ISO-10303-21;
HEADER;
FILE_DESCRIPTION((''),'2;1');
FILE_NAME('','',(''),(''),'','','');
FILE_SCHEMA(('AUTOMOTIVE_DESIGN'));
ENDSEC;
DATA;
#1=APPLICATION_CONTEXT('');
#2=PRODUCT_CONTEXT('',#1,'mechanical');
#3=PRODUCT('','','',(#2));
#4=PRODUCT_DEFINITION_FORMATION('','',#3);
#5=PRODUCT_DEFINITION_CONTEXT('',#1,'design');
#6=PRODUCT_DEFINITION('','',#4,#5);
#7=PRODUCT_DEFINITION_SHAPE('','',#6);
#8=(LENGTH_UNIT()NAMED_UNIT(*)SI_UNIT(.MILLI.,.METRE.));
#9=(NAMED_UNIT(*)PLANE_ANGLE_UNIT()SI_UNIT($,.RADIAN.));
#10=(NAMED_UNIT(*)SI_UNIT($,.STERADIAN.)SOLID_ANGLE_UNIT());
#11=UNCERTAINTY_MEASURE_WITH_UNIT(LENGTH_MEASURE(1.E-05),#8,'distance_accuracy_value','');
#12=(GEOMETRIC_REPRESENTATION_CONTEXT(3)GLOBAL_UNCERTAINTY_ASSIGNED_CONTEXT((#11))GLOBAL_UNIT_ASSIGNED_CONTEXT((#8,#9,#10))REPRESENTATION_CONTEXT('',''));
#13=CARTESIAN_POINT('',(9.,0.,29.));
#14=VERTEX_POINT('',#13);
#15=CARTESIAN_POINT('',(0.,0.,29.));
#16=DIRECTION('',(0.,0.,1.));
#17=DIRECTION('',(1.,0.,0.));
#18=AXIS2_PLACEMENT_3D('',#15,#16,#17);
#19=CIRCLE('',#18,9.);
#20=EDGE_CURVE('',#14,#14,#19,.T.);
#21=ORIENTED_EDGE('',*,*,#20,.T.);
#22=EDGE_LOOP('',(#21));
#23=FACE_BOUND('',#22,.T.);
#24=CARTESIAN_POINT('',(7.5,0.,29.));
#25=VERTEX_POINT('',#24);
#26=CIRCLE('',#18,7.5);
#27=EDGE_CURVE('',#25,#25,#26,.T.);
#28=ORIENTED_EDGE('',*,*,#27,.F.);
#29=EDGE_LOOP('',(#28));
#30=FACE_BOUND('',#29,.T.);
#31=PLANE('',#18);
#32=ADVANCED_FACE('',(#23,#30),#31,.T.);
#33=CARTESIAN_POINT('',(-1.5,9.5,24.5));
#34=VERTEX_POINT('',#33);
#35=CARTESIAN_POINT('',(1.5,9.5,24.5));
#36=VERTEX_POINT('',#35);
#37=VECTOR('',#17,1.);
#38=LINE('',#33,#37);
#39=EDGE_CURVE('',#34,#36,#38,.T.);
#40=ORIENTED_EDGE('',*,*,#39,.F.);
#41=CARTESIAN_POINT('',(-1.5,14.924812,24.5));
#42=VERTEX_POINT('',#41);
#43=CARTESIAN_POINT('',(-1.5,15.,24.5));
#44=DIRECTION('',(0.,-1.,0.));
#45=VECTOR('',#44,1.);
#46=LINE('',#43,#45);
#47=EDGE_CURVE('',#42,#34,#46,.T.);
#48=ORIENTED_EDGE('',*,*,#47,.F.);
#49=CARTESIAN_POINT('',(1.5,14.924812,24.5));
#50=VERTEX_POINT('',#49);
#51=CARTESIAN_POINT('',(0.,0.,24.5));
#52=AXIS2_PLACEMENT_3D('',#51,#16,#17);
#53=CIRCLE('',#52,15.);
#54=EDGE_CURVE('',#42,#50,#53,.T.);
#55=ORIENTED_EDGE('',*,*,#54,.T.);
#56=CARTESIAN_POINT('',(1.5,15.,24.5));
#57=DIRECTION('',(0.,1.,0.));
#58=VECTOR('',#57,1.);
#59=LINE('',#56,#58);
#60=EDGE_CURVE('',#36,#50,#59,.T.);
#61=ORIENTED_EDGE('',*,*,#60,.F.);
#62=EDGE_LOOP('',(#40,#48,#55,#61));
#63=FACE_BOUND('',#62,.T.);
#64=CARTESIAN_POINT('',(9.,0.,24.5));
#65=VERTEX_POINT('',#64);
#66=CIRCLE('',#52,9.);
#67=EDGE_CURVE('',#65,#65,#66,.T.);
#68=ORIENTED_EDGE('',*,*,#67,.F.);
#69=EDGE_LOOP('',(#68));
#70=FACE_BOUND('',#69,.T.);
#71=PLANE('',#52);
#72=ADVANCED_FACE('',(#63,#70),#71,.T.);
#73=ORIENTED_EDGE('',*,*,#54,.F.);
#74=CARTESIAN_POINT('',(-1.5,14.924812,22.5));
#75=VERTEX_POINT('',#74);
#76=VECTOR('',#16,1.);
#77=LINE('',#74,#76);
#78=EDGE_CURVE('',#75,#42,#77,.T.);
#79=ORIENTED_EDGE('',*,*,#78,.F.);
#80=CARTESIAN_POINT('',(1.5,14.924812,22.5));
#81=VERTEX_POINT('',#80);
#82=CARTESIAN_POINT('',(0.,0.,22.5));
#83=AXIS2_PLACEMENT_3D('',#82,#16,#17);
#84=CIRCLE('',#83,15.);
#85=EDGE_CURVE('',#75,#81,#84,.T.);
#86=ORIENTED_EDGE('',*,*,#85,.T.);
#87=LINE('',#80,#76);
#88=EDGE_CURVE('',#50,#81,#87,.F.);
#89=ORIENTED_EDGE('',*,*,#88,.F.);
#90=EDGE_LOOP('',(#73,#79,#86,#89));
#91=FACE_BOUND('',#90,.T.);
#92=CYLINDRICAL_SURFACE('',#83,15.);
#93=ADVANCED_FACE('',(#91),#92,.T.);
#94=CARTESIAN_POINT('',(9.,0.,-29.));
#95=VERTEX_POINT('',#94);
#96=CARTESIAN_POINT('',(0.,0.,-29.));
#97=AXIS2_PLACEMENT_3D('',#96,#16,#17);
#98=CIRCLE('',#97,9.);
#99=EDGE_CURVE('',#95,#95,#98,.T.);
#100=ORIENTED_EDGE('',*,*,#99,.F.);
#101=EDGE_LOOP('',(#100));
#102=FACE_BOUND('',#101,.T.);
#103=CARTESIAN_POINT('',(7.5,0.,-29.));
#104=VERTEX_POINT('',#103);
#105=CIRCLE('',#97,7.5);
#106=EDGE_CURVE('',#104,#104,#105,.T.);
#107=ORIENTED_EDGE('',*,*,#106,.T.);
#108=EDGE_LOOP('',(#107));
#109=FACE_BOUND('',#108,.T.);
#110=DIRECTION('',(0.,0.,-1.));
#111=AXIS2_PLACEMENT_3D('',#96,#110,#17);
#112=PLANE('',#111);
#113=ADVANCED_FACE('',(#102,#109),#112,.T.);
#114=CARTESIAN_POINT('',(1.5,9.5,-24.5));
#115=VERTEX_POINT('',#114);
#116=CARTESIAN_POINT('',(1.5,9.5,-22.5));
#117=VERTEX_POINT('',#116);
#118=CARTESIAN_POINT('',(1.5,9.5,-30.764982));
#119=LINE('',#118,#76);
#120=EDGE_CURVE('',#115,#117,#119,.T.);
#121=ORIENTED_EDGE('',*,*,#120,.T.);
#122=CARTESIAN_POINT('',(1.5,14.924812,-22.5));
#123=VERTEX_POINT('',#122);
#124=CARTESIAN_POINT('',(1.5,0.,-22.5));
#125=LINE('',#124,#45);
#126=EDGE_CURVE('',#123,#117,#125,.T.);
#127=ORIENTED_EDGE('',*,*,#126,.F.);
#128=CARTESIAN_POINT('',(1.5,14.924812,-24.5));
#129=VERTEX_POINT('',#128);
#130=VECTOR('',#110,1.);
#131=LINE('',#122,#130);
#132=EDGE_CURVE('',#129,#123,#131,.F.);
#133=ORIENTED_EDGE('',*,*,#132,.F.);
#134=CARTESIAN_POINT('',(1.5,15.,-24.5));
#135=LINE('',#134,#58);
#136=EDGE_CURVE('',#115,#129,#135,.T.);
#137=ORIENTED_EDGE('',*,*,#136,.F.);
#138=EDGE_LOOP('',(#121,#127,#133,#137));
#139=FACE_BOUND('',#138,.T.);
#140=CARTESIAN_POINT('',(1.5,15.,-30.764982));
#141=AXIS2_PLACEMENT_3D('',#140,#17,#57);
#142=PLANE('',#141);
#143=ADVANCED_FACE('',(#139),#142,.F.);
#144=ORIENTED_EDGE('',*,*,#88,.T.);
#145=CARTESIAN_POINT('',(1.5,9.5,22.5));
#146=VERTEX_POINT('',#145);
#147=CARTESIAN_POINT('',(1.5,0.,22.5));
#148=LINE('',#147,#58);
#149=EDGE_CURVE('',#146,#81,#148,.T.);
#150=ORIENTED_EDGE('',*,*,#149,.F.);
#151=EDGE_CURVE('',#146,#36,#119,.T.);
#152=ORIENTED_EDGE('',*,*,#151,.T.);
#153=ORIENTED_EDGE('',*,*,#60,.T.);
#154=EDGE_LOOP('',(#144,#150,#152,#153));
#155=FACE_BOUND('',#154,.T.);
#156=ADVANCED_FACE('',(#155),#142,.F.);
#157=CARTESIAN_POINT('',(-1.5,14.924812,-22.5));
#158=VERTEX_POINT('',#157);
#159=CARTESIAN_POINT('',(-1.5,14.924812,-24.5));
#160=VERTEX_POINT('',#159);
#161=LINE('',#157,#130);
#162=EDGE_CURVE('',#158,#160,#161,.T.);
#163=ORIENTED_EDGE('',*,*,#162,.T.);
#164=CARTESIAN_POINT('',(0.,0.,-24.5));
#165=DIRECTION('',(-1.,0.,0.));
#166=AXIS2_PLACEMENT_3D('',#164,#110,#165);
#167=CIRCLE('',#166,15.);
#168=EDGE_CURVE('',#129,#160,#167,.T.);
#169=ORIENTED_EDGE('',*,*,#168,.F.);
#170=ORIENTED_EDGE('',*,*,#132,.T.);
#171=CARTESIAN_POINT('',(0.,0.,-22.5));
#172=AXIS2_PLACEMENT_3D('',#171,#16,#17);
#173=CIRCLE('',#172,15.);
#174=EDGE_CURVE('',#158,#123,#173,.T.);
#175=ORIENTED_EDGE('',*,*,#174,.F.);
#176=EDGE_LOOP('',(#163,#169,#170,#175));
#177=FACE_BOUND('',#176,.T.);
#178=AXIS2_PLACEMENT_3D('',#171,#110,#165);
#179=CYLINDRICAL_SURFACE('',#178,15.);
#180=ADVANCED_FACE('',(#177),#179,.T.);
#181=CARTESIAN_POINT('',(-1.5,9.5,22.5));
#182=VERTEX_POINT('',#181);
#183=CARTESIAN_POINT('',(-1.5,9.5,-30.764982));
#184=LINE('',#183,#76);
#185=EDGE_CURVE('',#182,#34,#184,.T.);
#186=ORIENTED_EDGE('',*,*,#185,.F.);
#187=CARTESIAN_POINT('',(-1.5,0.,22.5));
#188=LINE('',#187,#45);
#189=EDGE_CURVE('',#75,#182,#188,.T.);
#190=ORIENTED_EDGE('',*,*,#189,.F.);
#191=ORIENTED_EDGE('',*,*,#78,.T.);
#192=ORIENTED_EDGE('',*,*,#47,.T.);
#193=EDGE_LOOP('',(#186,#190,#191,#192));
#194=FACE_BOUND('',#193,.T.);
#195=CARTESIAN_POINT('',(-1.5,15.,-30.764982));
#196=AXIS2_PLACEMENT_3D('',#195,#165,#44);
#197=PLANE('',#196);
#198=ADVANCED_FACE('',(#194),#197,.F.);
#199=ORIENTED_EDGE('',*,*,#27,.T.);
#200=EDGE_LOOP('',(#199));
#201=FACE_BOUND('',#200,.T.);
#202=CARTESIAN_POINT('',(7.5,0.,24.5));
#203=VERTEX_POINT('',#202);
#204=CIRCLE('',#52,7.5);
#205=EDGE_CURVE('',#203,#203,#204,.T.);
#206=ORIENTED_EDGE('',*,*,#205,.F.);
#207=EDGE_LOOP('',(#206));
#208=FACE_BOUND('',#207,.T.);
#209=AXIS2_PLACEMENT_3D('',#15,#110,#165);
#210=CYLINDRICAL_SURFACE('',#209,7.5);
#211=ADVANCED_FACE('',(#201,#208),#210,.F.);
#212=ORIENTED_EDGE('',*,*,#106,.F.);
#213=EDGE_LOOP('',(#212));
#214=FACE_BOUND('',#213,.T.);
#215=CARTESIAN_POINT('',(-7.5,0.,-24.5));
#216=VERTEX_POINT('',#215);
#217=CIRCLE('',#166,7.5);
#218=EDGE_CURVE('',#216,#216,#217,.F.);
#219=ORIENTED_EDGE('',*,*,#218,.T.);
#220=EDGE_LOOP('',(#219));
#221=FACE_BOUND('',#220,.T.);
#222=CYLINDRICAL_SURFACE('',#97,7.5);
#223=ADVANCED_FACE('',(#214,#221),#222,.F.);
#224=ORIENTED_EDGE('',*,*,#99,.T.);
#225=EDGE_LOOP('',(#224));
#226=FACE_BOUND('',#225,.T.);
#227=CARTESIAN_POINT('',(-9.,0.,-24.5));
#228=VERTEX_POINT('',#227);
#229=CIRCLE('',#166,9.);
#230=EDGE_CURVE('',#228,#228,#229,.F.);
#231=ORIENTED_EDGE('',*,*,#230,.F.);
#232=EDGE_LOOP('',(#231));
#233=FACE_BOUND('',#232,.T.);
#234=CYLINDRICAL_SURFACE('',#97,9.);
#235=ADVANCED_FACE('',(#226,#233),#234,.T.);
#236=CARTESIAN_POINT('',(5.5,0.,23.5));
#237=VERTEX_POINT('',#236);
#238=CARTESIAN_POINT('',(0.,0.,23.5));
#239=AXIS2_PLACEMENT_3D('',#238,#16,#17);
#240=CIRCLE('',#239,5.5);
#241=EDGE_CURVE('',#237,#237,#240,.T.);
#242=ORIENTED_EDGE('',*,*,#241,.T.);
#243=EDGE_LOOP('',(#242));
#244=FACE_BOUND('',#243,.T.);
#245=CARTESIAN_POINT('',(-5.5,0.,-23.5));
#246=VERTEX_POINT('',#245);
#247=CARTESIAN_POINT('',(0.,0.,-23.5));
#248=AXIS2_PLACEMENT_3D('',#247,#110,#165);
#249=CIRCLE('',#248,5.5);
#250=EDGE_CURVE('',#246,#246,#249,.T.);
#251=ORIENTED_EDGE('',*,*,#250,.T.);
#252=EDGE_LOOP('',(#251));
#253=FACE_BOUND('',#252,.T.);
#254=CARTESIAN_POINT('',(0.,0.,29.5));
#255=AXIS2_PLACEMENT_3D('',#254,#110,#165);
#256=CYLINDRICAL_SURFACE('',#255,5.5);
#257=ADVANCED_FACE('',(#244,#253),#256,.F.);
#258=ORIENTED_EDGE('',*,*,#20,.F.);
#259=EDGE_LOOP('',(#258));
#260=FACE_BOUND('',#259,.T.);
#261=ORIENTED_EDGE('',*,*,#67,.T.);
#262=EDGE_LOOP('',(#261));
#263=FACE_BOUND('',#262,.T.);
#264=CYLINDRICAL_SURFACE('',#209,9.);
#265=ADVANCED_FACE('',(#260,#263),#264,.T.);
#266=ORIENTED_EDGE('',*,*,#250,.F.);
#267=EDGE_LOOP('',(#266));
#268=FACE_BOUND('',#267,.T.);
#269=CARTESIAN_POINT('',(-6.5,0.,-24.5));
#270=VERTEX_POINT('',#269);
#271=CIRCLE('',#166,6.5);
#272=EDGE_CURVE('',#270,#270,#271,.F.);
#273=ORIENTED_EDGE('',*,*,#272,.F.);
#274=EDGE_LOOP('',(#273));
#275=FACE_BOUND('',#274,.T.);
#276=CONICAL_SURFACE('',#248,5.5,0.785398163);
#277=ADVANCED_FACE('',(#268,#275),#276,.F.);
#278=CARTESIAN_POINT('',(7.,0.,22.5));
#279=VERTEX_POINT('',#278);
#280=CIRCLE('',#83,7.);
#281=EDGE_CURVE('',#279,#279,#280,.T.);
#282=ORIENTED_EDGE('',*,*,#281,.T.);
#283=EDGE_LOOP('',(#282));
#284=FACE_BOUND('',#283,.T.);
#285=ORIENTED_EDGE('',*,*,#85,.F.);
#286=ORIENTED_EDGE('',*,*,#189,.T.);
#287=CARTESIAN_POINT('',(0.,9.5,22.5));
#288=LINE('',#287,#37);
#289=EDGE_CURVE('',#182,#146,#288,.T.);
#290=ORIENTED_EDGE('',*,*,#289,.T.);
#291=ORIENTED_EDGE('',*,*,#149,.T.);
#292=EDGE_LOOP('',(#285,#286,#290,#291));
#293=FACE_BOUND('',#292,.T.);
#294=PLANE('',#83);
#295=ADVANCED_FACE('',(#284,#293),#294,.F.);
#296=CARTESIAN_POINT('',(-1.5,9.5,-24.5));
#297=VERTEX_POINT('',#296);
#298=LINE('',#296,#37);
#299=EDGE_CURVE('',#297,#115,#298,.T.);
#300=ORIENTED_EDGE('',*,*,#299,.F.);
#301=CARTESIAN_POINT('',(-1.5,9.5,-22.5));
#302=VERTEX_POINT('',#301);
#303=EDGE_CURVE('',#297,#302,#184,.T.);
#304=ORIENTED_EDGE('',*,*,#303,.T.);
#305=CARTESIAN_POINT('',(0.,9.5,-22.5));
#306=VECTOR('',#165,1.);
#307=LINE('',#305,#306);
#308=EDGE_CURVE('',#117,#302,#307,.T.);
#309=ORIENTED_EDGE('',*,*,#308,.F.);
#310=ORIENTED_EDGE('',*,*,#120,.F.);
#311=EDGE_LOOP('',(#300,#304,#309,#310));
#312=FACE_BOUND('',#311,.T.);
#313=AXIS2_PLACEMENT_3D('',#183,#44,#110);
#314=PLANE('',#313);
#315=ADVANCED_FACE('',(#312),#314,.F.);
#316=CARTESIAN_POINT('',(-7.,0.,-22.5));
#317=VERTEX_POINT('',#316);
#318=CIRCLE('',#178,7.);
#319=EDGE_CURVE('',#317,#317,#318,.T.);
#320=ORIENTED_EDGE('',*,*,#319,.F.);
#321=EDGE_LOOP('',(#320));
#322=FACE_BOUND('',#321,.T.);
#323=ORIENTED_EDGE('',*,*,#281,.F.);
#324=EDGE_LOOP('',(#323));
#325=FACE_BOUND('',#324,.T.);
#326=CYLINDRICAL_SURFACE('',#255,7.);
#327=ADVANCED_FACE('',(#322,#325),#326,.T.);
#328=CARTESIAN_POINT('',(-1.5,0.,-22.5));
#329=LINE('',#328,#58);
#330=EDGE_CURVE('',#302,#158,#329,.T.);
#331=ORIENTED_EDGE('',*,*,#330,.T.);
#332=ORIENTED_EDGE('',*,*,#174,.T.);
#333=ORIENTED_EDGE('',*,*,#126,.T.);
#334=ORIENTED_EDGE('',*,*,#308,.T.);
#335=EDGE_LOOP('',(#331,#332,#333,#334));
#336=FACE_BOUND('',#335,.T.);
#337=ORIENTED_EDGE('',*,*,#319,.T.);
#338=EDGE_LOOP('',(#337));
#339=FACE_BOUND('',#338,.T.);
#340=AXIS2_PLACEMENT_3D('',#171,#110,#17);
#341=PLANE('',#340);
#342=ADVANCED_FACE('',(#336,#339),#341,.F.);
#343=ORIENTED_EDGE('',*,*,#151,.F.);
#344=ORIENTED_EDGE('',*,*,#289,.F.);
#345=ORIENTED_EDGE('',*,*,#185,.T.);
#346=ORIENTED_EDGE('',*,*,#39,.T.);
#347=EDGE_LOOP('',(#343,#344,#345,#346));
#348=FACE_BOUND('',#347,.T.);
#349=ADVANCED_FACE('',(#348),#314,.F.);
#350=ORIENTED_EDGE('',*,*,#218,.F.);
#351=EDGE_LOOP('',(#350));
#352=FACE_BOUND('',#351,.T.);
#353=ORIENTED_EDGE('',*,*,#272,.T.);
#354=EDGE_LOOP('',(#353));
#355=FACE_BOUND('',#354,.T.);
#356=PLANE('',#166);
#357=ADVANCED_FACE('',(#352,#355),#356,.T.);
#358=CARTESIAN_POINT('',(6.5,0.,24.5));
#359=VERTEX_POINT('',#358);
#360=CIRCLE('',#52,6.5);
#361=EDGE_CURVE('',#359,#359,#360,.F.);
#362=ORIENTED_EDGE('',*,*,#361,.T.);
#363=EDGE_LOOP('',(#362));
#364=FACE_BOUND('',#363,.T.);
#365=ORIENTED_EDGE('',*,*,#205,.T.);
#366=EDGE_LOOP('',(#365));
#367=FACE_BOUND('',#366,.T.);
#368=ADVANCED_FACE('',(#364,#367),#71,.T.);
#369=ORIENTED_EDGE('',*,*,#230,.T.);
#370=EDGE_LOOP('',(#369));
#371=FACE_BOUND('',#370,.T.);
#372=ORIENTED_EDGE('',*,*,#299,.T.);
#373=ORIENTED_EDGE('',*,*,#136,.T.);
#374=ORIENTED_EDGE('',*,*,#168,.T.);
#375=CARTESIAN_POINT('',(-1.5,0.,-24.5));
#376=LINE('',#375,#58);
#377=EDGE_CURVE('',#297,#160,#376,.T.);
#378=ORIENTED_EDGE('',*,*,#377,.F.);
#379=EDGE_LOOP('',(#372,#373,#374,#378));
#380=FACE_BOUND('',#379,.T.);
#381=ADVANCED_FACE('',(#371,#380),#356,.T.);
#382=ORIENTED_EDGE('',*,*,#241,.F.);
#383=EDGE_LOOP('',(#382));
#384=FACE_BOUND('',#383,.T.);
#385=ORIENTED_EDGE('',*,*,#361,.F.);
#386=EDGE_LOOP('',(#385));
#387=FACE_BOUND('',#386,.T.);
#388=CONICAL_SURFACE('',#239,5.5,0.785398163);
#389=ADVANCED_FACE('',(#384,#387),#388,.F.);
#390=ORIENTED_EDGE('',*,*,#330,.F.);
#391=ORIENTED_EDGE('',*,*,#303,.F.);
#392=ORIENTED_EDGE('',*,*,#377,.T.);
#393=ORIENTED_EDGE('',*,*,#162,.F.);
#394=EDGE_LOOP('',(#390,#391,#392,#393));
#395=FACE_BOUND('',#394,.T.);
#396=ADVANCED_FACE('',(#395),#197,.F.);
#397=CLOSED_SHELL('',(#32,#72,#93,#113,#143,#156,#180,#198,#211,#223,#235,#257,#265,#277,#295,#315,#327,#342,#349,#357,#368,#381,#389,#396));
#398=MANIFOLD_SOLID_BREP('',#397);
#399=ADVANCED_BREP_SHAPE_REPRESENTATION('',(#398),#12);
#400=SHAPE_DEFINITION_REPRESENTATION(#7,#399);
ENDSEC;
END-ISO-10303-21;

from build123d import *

# Parameters (mm, degrees)
SKETCH_1_R             = 7
SKETCH_1_R_2           = 5.5
EXTRUDE_1_DEPTH        = 29.5
EXTRUDE_START          = -7
SKETCH_2_R             = 15
SKETCH_2_R_2           = 5.5
EXTRUDE_2_DEPTH        = 7
SKETCH_5_W             = 5.5
SKETCH_5_H             = 9
CUT_EXTRUDE_4_DEPTH    = 15
HOLE_WIZARD_M3_1_D     = 2.5
HOLE_WIZARD_M3_1_DEPTH = 9.5
HOLE_WIZARD_M3_1_TIP   = 0.751075774
CHAMFER_1_SIZE         = 0.5
CHAMFER_2_SIZE         = 2
SKETCH1_R              = 7.5
EXTRUDE1_DEPTH         = 5
SKETCH2_W              = 25
SKETCH2_H              = 6
EXTRUDE2_DEPTH         = 5.5
CHAMFER2_SIZE          = 2
SKETCH4_R              = 17.5
EXTRUDE3_DEPTH         = 5.5
SKETCH5_R              = 17.5
EXTRUDE4_DEPTH         = 5.5
SKETCH6_R              = 9
SKETCH6_R_2            = 7.5
EXTRUDE5_DEPTH         = 5
SKETCH7_R              = 15
SKETCH7_R_2            = 5.5
EXTRUDE6_DEPTH         = 0.5
EXTRUDE7_START         = 0.5
SKETCH8_R              = 15
SKETCH8_R_2            = 5.5
EXTRUDE7_DEPTH         = 0.5
CHAMFER3_SIZE          = 1
EXTRUDE10_REACH        = 59.552
SKETCH11_W             = 3
SKETCH11_H             = 5.5


with BuildPart() as part:
    # 草图1 → 拉伸1 (new, symmetric)
    with BuildSketch(Plane.XY):
        Circle(SKETCH_1_R)
        Circle(SKETCH_1_R_2, mode=Mode.SUBTRACT)
    extrude(amount=EXTRUDE_1_DEPTH, both=True)

    # 草图2 → 拉伸2 (add)
    with BuildSketch(Plane.XY.offset(29.5).offset(EXTRUDE_START)):
        Circle(SKETCH_2_R)
        Circle(SKETCH_2_R_2, mode=Mode.SUBTRACT)
    extrude_2 = extrude(amount=EXTRUDE_2_DEPTH)

    # 镜向1: 拉伸2 across plane
    add(extrude_2.mirror(Plane.XY))

    # 草图5 → 拉伸4 (cut, symmetric)
    with BuildSketch(Plane(origin=(0, 0, 0), x_dir=(0, 0, -1), z_dir=(1, 0, 0))):
        with Locations((-26.75, -15.5)):
            Rectangle(SKETCH_5_W, SKETCH_5_H)
        with Locations((26.75, -15.5)):
            Rectangle(SKETCH_5_W, SKETCH_5_H)
    extrude(amount=CUT_EXTRUDE_4_DEPTH, both=True, mode=Mode.SUBTRACT)

    # M3 螺纹孔1
    with Locations(Plane(origin=(-8, -11, 27.5), x_dir=(0, 0, -1), z_dir=(0, -1, 0))):
        with Locations((0, 0), (0, 16), (55, 0), (55, 16)):
            Hole(HOLE_WIZARD_M3_1_D / 2, depth=HOLE_WIZARD_M3_1_DEPTH)
            with Locations((0, 0, -(HOLE_WIZARD_M3_1_DEPTH + HOLE_WIZARD_M3_1_TIP / 2))):  # 118° drill point
                Cone(0, HOLE_WIZARD_M3_1_D / 2, HOLE_WIZARD_M3_1_TIP, mode=Mode.SUBTRACT)

    # 倒角1
    chamfer_1_edges = [part.edges().sort_by_distance(p)[0] for p in [
        (8, -11, -28.75),
        (-8, -11, -28.75),
        (8, -11, 26.25),
        (-8, -11, 26.25),
    ]]
    chamfer(chamfer_1_edges, length=CHAMFER_1_SIZE)

    # 倒角2
    chamfer_2_edges = [part.edges().sort_by_distance(p)[0] for p in [
        (-5.5, 0, -29.5),
    ]]
    chamfer(chamfer_2_edges, length=CHAMFER_2_SIZE)

    # Sketch1 → Extrude1 (cut)
    with BuildSketch(Plane(origin=(0, 0, 29.5), x_dir=(-1, 0, 0), z_dir=(0, 0, -1))):
        Circle(SKETCH1_R)
    extrude(amount=EXTRUDE1_DEPTH, mode=Mode.SUBTRACT)

    # Sketch2 → Extrude2 (cut)
    with BuildSketch(Plane.XY.offset(-29.5)):
        with Locations((0, 12)):
            Rectangle(SKETCH2_W, SKETCH2_H)
    extrude(amount=EXTRUDE2_DEPTH, mode=Mode.SUBTRACT)

    # Chamfer2
    # the kernel refuses this chamfer: 2 mm, written as the material it takes off along each edge
    with BuildSketch(Plane(origin=(0, 0, 29.5), x_dir=(-1, 0, 0), z_dir=(0, -1, 0))) as chamfer2_piece_1:
        Polygon((7.5, CHAMFER2_SIZE), (7.5 + CHAMFER2_SIZE, 0), (7.5, 0), align=None)
    revolve(axis=Axis((0, 0, 29.5), (0, 0, -1)), mode=Mode.SUBTRACT)

    # Sketch4 → Extrude3 (cut)
    with BuildSketch(Plane.XY.offset(29.5)):
        Circle(SKETCH4_R)
    extrude(amount=-EXTRUDE3_DEPTH, mode=Mode.SUBTRACT)

    # Sketch5 → Extrude4 (cut)
    with BuildSketch(Plane(origin=(0, 0, -29.5), x_dir=(-1, 0, 0), z_dir=(0, 0, -1))):
        Circle(SKETCH5_R)
    extrude(amount=-EXTRUDE4_DEPTH, mode=Mode.SUBTRACT)

    # Sketch6 → Extrude5 (add)
    with BuildSketch(Plane.XY.offset(24)):
        with Locations(Location((0, 0, 0), (0, 0, 180))):
            Circle(SKETCH6_R)
        Circle(SKETCH6_R_2, mode=Mode.SUBTRACT)
    extrude5 = extrude(amount=EXTRUDE5_DEPTH)

    # Mirror1: Extrude5 across plane
    add(extrude5.mirror(Plane.XY))

    # Sketch7 → Extrude6 (add)
    with BuildSketch(Plane.XY.offset(24)):
        Circle(SKETCH7_R)
        Circle(SKETCH7_R_2, mode=Mode.SUBTRACT)
    extrude(amount=EXTRUDE6_DEPTH)

    # Sketch8 → Extrude7 (add)
    with BuildSketch(Plane(origin=(0, 0, -24), x_dir=(-1, 0, 0), z_dir=(0, 0, -1)).offset(EXTRUDE7_START)):
        Circle(SKETCH8_R)
        Circle(SKETCH8_R_2, mode=Mode.SUBTRACT)
    extrude(amount=-EXTRUDE7_DEPTH)

    # Chamfer3
    # the kernel refuses this chamfer: 1 mm, written as the material it takes off along each edge
    with BuildSketch(Plane(origin=(0, 0, 24.5), x_dir=(1, 0, 0), z_dir=(0, -1, 0))) as chamfer3_piece_1:
        Polygon((5.5, -CHAMFER3_SIZE), (5.5 + CHAMFER3_SIZE, 0), (5.5, 0), align=None)
    revolve(axis=Axis((0, 0, 24.5), (0, 0, 1)), mode=Mode.SUBTRACT)
    with BuildSketch(Plane(origin=(0, 0, -24.5), x_dir=(-1, 0, 0), z_dir=(0, -1, 0))) as chamfer3_piece_2:
        Polygon((5.5 + CHAMFER3_SIZE, 0), (5.5, -CHAMFER3_SIZE), (5.5, 0), align=None)
    revolve(axis=Axis((0, 0, -24.5), (0, 0, -1)), mode=Mode.SUBTRACT)

    # Extrude10: up to this face of the body (flat: up to its plane)
    extrude10_end = Plane(part.part.faces().sort_by_distance((14.575735931, 0, -24.5))[0])
    # Sketch11 → Extrude10 (cut, up to the picked face)
    with BuildSketch(Plane.XY.offset(24.5), mode=Mode.PRIVATE) as extrude10_sk1:
        with Locations((0, 12.25)):
            Rectangle(SKETCH11_W, SKETCH11_H)
    extrude10_tool1 = split(extrude(extrude10_sk1.sketch, amount=-EXTRUDE10_REACH, mode=Mode.PRIVATE), bisect_by=extrude10_end, keep=Keep.BOTH, mode=Mode.PRIVATE)
    add(extrude10_tool1.solids().sort_by(Axis((0, 12.25, 24.5), (0, 0, -1)))[0], mode=Mode.SUBTRACT)


solid = part.part
